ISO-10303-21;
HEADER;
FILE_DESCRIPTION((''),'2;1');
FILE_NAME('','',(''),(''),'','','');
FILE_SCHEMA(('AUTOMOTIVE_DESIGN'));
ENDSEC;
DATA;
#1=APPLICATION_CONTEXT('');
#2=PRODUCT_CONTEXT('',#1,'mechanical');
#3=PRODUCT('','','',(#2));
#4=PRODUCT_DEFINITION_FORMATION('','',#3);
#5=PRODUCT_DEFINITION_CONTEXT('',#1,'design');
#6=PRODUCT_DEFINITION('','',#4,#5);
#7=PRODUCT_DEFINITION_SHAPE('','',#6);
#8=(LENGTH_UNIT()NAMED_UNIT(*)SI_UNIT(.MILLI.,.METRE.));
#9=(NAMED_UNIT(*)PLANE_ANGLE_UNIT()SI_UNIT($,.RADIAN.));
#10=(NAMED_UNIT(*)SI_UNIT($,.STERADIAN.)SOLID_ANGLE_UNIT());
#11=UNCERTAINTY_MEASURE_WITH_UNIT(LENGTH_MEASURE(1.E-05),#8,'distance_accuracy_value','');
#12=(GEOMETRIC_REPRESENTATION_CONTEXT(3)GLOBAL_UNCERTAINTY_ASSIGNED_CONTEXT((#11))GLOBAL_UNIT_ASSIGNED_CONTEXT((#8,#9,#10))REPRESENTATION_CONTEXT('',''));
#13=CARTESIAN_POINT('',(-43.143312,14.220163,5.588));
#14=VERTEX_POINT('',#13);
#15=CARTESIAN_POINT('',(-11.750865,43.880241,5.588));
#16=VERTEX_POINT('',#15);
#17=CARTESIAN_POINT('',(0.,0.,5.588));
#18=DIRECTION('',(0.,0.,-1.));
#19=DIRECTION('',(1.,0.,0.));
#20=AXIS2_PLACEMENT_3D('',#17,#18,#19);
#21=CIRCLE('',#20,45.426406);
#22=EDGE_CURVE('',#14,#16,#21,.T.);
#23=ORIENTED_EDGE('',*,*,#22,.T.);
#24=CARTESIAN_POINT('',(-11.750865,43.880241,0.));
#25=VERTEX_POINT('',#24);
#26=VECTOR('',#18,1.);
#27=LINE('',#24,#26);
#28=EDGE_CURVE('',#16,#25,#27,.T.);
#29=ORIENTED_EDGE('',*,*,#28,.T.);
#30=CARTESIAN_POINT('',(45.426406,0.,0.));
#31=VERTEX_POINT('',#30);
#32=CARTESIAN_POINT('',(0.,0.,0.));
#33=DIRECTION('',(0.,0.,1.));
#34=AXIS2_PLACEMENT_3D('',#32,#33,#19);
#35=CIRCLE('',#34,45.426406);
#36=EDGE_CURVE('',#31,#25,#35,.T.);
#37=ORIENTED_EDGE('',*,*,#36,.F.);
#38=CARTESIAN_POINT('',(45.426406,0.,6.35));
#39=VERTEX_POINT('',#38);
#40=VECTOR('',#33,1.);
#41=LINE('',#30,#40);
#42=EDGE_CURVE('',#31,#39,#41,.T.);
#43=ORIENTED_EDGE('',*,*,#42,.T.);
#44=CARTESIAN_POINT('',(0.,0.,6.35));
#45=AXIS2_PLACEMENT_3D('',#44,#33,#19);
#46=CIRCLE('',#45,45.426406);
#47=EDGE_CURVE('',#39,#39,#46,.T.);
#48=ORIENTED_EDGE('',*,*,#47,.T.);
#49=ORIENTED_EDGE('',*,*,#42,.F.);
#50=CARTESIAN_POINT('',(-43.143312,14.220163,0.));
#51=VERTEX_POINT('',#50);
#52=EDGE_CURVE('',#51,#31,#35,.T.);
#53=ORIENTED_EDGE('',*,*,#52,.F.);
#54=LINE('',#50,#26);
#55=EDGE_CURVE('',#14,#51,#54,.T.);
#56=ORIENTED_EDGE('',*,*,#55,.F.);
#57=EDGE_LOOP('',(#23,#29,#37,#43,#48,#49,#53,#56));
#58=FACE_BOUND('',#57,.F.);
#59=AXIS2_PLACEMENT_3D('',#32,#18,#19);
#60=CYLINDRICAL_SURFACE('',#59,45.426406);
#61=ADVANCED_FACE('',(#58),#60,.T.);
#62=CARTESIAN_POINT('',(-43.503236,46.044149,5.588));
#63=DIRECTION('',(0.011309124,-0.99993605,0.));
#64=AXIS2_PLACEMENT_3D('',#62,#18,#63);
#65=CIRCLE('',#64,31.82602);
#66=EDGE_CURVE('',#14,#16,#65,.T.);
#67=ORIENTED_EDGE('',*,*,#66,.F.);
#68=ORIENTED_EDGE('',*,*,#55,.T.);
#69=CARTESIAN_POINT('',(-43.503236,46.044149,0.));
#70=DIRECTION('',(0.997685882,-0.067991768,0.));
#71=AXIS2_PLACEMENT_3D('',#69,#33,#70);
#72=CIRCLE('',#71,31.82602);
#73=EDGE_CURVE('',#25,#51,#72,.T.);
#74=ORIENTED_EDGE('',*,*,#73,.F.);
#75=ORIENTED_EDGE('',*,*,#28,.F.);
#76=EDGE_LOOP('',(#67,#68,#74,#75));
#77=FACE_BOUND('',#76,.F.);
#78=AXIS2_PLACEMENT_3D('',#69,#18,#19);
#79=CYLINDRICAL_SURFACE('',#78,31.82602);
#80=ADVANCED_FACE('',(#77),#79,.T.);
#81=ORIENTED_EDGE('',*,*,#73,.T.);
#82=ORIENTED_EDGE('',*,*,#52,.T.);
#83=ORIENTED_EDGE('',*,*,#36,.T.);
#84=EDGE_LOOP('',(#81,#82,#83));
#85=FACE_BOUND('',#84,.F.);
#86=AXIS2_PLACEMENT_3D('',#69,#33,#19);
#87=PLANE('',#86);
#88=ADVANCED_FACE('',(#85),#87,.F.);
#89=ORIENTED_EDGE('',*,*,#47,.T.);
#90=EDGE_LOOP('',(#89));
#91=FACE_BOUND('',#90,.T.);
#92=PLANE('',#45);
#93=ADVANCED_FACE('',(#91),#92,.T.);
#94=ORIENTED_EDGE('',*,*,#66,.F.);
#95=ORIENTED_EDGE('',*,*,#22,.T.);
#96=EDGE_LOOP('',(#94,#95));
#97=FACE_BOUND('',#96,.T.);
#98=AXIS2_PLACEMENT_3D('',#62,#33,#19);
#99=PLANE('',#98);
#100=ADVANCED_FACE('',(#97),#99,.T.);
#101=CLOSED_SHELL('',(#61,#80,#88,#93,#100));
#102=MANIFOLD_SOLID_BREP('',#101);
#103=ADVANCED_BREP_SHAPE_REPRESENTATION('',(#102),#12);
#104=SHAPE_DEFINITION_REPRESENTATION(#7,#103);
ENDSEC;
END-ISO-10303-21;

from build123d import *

# Parameters (mm, degrees)
F0_R     = 45.4264062375
F1_DEPTH = 6.35
F2_R     = 31.826020393
F3_DEPTH = 5.588


# Not quite as in the source:
# - the program builds the solid bodies; features that only make, move or delete a surface that nothing else refers to are left out


with BuildPart() as f1:
    # F0 (on Top) → F1 (new body)
    with BuildSketch(Plane.XY):
        Circle(F0_R)
    extrude(amount=F1_DEPTH)

    # F2 (on Top) → F3 (join)
    with BuildSketch(Plane.XY):
        with Locations((-43.5032360256, 46.0441485047)):
            Circle(F2_R)
    extrude(amount=F3_DEPTH)


solid = f1.part
